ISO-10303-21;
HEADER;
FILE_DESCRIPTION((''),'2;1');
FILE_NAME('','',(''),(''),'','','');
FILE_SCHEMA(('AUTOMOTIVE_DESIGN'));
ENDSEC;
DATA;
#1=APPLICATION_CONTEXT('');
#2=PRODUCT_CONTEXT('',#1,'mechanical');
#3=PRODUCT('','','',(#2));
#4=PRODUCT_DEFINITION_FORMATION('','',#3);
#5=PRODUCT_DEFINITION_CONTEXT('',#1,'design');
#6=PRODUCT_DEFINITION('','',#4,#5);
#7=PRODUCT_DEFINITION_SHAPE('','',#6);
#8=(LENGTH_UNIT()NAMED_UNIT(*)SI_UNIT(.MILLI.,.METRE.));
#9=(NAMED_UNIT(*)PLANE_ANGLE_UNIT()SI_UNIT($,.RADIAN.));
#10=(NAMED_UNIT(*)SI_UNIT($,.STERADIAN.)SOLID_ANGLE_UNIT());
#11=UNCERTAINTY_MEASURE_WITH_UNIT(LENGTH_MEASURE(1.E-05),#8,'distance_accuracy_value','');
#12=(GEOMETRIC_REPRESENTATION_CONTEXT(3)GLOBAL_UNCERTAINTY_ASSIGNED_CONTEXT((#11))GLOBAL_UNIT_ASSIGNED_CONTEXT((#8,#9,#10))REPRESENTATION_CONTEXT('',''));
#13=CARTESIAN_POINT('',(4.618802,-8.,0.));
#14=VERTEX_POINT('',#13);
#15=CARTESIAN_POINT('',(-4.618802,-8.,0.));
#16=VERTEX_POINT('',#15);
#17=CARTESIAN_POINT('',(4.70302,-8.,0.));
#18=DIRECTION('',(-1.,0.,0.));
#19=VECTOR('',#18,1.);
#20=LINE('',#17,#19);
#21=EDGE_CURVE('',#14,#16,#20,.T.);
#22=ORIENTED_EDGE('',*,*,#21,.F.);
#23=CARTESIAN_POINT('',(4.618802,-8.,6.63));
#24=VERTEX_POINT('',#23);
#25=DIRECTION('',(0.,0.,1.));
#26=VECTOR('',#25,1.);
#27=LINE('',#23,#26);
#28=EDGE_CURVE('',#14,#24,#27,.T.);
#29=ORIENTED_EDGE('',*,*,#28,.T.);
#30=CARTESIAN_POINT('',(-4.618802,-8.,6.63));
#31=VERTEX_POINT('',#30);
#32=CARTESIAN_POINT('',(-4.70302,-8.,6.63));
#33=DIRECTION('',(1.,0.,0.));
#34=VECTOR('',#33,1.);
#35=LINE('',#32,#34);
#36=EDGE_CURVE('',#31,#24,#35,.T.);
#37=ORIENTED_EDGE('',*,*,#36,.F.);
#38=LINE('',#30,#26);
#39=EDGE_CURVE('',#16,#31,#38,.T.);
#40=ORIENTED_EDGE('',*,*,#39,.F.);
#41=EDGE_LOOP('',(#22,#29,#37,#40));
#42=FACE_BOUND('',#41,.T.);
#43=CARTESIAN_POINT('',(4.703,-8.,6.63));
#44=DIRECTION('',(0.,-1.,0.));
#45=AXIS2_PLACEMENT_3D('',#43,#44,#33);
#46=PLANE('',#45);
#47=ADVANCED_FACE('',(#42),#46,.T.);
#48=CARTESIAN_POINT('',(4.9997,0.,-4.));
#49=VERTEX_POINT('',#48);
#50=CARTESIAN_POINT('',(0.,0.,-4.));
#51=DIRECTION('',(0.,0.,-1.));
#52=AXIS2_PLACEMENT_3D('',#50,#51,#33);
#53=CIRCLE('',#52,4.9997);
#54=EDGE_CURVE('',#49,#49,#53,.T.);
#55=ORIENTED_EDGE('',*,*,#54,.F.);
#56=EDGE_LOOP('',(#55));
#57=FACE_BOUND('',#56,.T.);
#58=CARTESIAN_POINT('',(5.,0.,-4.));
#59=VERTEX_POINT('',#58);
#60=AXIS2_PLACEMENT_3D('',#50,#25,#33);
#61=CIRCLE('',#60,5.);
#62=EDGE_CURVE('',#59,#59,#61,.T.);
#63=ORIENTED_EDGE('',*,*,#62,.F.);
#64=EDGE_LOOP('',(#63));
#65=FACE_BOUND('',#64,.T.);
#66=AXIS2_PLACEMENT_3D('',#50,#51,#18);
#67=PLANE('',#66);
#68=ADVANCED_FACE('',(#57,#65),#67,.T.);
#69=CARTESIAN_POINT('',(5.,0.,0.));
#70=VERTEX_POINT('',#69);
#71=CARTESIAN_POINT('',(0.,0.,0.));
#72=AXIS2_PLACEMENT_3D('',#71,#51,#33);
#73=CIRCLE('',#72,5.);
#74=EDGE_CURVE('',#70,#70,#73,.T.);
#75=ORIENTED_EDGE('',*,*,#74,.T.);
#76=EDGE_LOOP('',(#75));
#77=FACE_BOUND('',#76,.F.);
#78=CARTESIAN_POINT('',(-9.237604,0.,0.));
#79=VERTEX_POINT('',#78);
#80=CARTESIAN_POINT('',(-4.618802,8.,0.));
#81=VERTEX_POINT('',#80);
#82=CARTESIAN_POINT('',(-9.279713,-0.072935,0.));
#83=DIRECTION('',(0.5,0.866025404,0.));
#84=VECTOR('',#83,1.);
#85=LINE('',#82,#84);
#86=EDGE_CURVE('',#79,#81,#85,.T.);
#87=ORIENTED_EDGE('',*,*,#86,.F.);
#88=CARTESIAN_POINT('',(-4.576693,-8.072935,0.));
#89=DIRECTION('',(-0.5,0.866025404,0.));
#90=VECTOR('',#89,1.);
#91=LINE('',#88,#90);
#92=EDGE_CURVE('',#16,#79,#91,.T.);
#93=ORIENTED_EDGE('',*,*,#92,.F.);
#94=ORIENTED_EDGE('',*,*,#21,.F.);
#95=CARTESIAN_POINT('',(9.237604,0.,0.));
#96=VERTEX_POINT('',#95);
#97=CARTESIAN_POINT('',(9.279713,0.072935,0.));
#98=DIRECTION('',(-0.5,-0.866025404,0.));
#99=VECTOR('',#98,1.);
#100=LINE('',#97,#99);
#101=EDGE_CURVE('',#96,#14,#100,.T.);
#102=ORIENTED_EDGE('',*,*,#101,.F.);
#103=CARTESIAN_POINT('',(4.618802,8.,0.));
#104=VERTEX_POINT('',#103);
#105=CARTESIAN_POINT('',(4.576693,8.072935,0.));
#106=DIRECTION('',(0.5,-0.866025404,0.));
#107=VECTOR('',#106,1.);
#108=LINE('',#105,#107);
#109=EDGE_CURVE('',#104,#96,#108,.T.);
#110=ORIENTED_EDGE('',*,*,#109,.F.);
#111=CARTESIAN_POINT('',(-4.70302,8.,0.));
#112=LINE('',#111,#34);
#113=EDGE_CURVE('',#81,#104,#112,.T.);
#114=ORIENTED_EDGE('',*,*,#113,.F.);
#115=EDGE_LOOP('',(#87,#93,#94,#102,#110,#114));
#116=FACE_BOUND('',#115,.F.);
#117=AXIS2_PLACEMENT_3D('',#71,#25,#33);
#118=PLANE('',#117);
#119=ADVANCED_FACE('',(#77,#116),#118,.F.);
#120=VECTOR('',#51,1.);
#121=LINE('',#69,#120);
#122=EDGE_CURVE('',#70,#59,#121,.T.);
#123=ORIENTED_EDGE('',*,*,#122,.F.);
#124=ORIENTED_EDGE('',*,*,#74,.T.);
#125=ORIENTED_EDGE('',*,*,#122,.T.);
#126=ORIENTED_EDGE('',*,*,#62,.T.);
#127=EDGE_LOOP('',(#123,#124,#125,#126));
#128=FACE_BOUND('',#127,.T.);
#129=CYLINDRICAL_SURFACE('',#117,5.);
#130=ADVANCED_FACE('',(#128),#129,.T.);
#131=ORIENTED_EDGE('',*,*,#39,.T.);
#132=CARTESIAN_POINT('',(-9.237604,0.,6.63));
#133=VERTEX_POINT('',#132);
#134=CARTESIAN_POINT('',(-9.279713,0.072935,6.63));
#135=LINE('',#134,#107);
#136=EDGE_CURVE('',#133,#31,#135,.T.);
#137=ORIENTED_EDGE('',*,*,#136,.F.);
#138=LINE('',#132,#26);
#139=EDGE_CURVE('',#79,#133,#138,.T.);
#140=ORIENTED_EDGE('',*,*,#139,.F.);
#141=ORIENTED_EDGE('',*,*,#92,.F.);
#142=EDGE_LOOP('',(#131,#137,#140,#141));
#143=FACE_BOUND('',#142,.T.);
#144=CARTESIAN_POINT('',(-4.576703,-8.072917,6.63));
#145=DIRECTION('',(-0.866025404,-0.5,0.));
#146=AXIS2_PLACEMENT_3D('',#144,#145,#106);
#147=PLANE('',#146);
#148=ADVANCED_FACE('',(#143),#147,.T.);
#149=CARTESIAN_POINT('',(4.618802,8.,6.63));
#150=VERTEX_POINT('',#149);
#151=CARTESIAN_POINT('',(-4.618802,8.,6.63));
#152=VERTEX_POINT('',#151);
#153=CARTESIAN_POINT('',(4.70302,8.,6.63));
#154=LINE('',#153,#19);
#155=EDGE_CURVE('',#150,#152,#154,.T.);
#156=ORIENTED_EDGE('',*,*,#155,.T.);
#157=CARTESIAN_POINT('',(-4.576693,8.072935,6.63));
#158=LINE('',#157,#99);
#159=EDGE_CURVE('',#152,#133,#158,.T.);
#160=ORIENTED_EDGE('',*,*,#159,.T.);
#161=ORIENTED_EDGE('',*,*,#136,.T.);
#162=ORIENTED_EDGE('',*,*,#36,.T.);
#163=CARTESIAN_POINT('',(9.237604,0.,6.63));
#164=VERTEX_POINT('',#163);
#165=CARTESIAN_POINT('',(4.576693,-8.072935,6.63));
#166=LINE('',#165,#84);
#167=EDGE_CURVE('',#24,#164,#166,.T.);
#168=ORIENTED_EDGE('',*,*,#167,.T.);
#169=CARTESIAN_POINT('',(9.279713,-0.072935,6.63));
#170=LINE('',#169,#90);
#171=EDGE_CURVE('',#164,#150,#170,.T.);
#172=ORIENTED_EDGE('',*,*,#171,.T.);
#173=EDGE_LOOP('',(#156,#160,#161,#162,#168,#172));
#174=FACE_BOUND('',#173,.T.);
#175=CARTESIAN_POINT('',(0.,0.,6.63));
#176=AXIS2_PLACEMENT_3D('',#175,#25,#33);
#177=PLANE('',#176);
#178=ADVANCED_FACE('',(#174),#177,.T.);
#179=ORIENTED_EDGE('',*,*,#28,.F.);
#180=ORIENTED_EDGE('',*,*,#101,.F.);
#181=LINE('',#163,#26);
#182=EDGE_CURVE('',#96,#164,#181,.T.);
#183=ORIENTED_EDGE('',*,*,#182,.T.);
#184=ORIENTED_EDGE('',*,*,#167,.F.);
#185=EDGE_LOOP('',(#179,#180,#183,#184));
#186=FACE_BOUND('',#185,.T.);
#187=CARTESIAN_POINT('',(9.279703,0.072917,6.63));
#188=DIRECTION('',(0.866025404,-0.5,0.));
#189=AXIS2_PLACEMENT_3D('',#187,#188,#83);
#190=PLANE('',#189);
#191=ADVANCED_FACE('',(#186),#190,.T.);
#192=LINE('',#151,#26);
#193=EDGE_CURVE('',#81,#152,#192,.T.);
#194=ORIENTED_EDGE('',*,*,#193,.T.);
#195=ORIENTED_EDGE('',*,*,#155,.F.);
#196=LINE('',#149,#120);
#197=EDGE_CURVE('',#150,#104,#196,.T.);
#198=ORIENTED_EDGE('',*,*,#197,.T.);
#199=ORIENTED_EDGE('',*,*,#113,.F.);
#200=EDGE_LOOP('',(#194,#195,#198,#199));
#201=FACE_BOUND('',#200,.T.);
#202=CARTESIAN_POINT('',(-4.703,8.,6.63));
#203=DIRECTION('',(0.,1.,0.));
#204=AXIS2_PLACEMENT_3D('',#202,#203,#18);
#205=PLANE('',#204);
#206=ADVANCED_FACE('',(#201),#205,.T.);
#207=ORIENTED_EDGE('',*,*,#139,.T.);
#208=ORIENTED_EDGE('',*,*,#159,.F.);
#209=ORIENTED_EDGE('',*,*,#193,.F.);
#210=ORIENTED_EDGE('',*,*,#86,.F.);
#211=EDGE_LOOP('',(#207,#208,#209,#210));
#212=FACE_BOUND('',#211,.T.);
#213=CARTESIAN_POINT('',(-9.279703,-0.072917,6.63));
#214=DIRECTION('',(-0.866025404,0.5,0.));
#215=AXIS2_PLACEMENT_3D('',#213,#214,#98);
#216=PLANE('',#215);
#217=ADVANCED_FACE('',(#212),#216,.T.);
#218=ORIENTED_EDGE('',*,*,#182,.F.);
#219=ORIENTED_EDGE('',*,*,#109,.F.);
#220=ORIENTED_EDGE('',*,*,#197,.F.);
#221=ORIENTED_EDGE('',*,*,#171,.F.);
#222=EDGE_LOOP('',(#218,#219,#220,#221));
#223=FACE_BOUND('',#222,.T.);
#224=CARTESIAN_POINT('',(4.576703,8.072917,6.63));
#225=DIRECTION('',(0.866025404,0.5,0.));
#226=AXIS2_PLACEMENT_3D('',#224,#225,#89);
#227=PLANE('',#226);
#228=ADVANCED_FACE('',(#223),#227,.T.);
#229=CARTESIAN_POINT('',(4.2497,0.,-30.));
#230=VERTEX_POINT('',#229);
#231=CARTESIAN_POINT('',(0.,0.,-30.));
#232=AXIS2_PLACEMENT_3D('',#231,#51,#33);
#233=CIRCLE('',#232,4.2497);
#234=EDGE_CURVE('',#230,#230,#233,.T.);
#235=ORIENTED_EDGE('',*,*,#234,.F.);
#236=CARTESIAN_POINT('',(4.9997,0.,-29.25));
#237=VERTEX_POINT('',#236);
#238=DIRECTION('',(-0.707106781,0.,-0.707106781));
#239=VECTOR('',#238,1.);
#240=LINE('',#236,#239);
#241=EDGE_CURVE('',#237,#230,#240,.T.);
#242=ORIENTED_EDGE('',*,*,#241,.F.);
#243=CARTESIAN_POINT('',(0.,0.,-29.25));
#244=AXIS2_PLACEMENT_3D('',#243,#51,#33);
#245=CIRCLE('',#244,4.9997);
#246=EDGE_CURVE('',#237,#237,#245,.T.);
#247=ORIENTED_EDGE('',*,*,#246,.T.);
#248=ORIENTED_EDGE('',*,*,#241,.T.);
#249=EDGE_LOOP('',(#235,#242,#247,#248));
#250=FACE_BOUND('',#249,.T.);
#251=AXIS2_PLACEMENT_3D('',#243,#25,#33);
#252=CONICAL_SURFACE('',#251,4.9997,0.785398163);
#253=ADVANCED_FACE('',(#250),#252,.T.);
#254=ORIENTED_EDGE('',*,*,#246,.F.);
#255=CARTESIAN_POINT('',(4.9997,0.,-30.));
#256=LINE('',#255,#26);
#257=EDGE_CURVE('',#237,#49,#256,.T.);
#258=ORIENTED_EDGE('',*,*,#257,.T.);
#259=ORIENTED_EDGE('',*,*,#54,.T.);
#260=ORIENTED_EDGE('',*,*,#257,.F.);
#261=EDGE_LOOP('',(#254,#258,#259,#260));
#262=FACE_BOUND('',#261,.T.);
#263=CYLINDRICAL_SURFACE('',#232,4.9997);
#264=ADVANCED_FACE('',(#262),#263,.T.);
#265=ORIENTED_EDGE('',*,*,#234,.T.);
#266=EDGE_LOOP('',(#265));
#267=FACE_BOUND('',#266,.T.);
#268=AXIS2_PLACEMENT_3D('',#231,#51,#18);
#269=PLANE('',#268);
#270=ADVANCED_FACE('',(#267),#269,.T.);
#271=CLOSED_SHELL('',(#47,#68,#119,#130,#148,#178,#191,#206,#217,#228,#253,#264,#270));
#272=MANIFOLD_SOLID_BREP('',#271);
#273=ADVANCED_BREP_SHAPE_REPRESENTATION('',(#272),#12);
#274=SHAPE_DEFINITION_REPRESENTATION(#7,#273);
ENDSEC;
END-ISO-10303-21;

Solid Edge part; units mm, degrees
sketch "Sketch1" plane through (0, 0, 0) normal (0, 0, 1) x (1, 0, 0)
  circle A0 centre (0, 0) radius 9.28
  dimension "D1" = 18.56
extrude "Protrusion1" add sketch "Sketch1" along normal blind 6.63
sketch "Sketch2" plane through (0, 0, 0) normal (0, 0, -1) x (1, 0, 0)
  circle A0 centre (0, 0) radius 5
extrude "Protrusion2" add sketch "Sketch2" along normal blind 30
sketch "Sketch3" plane through (0, 0, -30) normal (0, 0, -1) x (1, 0, 0)
  circle A0 centre (0, 0) radius 4.9997
extrude "Cutout1" cut sketch "Sketch3" against normal blind 26 flip side to cut
chamfer "Chamfer_1" distance 0.75 angle 45 1 edges at (-4.9997, 0, -30)
sketch "Sketch4" plane through (0, 0, 6.63) normal (0, 0, 1) x (1, 0, 0)
  line L0 (-4.703, 8) -> (4.703, 8)
  dimension "D1" = 16
extrude "Cutout2" cut sketch "Sketch4" against normal up to next material side at (0, 8.05, 6.63)
pattern_circular "Pattern1" count 6 over 360 about axis through (0, 0, 6.63) along (0, 0, 1) of "Cutout2"
properties part number "24104922"
